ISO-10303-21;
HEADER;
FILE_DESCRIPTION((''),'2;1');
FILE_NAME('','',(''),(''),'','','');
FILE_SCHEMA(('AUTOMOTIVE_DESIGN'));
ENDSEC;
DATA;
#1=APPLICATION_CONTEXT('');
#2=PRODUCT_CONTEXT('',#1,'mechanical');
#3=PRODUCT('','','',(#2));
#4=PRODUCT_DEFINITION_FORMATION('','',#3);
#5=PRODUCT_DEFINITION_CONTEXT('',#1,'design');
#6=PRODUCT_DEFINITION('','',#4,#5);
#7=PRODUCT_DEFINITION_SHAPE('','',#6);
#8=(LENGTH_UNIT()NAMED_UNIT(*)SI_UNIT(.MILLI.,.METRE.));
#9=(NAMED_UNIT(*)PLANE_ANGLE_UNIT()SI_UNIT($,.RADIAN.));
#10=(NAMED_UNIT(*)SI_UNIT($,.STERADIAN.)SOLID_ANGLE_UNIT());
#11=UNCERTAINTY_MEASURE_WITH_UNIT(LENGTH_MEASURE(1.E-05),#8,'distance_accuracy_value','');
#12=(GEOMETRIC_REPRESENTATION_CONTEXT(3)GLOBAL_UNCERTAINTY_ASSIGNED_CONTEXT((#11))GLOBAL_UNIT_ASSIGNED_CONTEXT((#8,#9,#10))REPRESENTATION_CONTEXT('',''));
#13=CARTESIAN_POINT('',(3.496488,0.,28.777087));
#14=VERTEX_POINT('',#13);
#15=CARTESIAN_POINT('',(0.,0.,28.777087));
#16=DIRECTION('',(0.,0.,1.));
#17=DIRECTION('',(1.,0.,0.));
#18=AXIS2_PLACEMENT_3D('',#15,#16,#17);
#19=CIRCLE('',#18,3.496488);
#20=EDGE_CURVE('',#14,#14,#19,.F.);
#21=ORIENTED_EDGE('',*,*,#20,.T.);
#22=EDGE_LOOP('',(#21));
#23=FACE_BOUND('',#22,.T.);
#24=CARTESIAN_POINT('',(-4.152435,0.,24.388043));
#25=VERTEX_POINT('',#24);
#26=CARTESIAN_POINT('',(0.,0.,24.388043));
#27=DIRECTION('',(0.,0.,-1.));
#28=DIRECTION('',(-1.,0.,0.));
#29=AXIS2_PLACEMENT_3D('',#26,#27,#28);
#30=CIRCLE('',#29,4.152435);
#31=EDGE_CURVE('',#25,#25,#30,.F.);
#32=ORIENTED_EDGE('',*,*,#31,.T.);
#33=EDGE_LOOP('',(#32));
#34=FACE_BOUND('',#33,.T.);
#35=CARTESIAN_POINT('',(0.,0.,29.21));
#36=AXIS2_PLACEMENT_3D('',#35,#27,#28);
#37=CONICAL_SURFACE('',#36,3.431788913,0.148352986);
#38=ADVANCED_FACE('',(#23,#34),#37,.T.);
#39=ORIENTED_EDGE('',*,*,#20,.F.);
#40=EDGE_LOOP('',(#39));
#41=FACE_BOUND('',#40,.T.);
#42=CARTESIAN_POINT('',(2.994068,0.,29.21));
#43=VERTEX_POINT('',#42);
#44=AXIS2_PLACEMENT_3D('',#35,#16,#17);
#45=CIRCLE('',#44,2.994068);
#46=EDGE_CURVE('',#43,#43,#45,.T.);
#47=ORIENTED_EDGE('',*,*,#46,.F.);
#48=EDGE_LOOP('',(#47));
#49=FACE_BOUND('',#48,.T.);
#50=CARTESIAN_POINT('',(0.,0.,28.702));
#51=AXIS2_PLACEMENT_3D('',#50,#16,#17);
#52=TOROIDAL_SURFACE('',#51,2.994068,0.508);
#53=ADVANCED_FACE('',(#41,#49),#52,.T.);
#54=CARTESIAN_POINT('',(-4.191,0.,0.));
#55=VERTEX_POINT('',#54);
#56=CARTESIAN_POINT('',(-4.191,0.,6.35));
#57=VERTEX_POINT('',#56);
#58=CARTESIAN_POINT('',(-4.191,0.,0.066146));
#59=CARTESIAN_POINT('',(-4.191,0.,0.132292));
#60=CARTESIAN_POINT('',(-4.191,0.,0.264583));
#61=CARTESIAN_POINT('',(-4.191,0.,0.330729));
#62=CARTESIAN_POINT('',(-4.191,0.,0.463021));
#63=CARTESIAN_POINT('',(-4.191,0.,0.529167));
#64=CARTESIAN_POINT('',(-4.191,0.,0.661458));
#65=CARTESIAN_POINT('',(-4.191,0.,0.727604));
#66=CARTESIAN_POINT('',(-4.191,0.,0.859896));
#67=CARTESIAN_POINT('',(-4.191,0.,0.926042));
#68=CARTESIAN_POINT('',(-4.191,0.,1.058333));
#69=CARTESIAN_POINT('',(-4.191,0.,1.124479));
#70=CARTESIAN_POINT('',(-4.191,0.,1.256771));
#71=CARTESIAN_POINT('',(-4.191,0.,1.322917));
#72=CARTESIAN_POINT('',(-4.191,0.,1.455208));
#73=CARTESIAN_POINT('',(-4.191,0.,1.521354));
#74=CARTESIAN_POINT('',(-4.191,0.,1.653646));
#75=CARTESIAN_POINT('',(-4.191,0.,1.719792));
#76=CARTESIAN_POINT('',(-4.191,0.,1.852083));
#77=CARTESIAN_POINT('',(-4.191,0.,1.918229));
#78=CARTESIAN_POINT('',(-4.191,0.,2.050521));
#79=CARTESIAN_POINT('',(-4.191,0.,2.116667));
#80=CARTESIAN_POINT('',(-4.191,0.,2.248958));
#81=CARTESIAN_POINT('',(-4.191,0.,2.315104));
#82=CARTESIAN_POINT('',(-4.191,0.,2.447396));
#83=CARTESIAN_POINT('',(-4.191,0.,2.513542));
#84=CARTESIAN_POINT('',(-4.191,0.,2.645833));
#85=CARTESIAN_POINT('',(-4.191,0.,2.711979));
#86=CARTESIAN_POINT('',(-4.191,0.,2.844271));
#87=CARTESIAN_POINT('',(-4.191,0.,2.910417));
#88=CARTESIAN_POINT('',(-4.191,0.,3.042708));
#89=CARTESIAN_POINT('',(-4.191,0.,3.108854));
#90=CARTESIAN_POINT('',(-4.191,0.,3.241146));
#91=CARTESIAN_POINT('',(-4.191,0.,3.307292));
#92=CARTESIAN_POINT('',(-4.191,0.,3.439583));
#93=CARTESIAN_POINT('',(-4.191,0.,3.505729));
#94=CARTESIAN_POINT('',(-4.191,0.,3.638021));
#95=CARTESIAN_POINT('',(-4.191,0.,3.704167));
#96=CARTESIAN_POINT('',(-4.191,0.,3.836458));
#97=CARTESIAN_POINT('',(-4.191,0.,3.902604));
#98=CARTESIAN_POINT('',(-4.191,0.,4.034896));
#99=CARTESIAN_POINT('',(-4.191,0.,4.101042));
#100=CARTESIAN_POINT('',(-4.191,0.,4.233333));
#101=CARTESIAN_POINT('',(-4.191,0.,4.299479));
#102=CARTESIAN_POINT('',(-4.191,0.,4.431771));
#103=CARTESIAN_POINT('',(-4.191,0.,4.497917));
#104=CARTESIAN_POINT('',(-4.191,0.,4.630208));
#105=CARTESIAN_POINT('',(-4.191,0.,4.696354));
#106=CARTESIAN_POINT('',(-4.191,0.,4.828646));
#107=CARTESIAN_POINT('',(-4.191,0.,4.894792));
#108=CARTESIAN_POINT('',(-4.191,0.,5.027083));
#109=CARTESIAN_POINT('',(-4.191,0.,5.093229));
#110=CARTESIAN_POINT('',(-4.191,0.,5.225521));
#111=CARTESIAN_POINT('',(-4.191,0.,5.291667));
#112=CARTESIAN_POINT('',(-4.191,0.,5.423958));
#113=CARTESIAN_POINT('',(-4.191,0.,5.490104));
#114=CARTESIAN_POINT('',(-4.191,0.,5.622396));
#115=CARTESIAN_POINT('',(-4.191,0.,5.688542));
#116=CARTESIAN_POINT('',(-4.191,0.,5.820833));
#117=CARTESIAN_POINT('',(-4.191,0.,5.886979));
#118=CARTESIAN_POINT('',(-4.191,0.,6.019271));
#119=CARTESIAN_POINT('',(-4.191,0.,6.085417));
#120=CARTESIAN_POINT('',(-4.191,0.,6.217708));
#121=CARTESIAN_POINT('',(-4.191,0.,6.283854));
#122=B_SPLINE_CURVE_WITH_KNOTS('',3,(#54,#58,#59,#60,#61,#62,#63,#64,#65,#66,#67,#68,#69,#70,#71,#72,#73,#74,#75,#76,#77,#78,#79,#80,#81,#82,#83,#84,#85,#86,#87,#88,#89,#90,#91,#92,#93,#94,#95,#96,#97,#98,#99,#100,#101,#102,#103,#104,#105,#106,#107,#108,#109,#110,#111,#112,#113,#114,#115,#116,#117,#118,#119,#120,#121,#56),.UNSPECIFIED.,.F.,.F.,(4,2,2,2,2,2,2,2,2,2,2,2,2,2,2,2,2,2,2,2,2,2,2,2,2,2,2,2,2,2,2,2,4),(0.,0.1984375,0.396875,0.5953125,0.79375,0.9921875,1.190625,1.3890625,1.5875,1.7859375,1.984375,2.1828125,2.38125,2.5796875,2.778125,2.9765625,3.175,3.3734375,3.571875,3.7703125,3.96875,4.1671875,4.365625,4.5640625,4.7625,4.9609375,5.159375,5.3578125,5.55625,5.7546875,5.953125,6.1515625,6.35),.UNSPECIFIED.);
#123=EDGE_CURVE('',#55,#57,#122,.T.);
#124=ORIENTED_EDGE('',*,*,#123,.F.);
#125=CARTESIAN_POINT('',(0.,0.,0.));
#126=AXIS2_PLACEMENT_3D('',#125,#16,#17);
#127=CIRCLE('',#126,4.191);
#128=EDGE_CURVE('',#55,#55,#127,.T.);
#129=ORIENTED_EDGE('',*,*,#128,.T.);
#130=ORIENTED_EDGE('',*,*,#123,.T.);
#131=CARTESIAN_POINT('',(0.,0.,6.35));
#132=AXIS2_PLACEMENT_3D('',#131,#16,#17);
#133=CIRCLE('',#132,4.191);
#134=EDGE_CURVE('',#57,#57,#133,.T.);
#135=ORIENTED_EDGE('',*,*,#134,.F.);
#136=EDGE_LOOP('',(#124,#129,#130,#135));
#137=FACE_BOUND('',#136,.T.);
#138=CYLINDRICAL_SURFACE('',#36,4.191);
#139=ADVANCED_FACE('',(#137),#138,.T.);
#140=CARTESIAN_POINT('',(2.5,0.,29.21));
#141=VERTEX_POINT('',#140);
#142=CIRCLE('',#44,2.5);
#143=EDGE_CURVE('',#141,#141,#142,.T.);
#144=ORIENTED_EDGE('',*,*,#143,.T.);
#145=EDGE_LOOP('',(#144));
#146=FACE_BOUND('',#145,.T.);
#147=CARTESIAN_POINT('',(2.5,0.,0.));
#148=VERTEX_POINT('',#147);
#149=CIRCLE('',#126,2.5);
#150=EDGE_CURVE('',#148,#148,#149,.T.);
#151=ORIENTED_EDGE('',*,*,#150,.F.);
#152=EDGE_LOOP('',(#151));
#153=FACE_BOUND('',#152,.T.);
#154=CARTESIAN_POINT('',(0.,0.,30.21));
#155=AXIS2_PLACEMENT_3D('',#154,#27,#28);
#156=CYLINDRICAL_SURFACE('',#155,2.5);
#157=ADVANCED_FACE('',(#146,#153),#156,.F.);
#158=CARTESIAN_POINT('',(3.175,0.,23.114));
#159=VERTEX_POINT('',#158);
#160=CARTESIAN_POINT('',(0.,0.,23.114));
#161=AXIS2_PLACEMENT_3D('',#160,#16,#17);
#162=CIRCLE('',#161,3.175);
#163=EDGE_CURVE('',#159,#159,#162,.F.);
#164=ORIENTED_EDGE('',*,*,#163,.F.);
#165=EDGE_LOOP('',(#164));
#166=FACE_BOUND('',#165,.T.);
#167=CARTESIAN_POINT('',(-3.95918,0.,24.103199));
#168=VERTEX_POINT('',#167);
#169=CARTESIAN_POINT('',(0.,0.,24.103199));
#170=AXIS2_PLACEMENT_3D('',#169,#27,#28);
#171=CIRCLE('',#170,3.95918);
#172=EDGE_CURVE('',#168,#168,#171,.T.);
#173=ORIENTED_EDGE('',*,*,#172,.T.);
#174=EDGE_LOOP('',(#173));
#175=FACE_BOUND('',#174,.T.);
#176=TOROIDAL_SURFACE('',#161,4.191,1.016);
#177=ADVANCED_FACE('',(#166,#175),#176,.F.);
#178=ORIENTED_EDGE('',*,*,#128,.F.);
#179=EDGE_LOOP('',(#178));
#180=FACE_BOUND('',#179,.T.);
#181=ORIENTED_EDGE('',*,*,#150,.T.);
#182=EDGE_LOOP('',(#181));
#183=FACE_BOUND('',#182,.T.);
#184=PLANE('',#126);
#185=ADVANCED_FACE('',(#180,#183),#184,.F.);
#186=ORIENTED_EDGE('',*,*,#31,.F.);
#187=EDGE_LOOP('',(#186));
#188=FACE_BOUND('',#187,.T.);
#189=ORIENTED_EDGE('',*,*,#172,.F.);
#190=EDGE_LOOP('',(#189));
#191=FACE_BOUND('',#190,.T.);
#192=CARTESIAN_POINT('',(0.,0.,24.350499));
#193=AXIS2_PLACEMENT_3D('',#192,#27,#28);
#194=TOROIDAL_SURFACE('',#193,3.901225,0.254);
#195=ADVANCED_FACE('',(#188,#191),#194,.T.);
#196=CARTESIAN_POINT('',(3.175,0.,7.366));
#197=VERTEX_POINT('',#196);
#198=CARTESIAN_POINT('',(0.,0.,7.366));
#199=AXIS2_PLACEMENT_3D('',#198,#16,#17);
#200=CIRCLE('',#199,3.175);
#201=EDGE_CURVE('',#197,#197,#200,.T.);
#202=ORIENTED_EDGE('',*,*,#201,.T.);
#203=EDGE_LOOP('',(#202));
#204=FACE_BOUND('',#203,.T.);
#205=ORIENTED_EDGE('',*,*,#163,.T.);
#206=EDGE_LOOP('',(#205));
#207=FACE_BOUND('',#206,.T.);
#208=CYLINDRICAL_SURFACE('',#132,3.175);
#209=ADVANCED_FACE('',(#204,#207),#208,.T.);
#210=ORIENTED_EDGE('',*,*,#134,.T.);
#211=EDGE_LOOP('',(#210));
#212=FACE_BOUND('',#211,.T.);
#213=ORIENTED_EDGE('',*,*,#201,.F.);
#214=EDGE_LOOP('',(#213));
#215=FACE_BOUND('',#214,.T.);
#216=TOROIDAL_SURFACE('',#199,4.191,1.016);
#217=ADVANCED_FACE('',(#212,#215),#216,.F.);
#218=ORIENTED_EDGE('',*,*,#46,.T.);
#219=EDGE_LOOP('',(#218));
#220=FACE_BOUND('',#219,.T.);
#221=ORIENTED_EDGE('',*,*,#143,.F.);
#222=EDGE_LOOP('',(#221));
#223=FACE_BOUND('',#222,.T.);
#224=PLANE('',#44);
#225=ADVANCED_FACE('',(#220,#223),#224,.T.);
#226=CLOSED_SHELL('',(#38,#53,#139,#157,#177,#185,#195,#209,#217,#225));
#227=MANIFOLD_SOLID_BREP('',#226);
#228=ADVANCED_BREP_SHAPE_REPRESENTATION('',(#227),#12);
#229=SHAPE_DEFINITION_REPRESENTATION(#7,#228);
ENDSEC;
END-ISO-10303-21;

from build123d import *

# Parameters (mm, degrees)
SKETCH1_R           = 4.191
BOSS_EXTRUDE1_DEPTH = 29.21
SKETCH2_R           = 2.5
CUT_EXTRUDE1_START  = -5.08
SKETCH3_R           = 5.08
SKETCH3_R_2         = 3.175
CUT_EXTRUDE1_DEPTH  = 17.78
FILLET1_R           = 1.016
FILLET2_R           = 1.016
CHAMFER1_SIZE       = 5.08
CHAMFER1_SIZE_2     = 0.759211087
FILLET3_R           = 0.254
FILLET4_R           = 0.508


# Some blends are built 0.0001 mm under size
with BuildPart() as part:
    # Sketch1 → Boss-Extrude1 (new body)
    with BuildSketch(Plane.XY):
        with Locations(Location((0, 0, 0), (0, 0, 180))):
            Circle(SKETCH1_R)
    extrude(amount=BOSS_EXTRUDE1_DEPTH)

    # Cut-Sweep1: sweep along a curve in space
    with BuildLine() as cut_sweep1_path:
        Line((0, 0, 29.21), (0, 0, 0))
    # Sketch2 → Cut-Sweep1 (sweep, cut)
    with BuildSketch(Plane.XY.offset(29.21)):
        Circle(SKETCH2_R)
    sweep(path=cut_sweep1_path.line, mode=Mode.SUBTRACT)

    # Sketch3 → Cut-Extrude1 (cut)
    with BuildSketch(Plane.XY.offset(29.21).offset(CUT_EXTRUDE1_START)):
        Circle(SKETCH3_R)
        Circle(SKETCH3_R_2, mode=Mode.SUBTRACT)
    extrude(amount=-CUT_EXTRUDE1_DEPTH, mode=Mode.SUBTRACT)

    # Fillet1
    fillet1_edges = [part.edges().sort_by_distance(p)[0] for p in [
        (-3.175, 0, 6.35),
    ]]
    fillet(fillet1_edges, radius=FILLET1_R - 0.0001)  # a hair under: the kernel refuses the full size

    # Fillet2
    fillet2_edges = [part.edges().sort_by_distance(p)[0] for p in [
        (-3.175, 0, 24.13),
    ]]
    fillet(fillet2_edges, radius=FILLET2_R - 0.0001)  # a hair under: the kernel refuses the full size

    # Chamfer1
    # the kernel refuses this chamfer: 5.08, 0.759211087 mm, written as the material it takes off along each edge
    with BuildSketch(Plane(origin=(0, 0, 29.21), x_dir=(-1, 0, 0), z_dir=(0, 1, 0))) as chamfer1_piece_1:
        Polygon((4.191, -CHAMFER1_SIZE), (4.191 - CHAMFER1_SIZE_2, 0), (4.191, 0), align=None)
    revolve(axis=Axis((0, 0, 29.21), (0, 0, 1)), mode=Mode.SUBTRACT)

    # Fillet3
    fillet3_edges = [part.edges().sort_by_distance(p)[0] for p in [
        (4.191, 0, 24.13),
    ]]
    fillet(fillet3_edges, radius=FILLET3_R)

    # Fillet4
    fillet4_edges = [part.edges().sort_by_distance(p)[0] for p in [
        (3.431788913, 0, 29.21),
    ]]
    fillet(fillet4_edges, radius=FILLET4_R)


solid = part.part
